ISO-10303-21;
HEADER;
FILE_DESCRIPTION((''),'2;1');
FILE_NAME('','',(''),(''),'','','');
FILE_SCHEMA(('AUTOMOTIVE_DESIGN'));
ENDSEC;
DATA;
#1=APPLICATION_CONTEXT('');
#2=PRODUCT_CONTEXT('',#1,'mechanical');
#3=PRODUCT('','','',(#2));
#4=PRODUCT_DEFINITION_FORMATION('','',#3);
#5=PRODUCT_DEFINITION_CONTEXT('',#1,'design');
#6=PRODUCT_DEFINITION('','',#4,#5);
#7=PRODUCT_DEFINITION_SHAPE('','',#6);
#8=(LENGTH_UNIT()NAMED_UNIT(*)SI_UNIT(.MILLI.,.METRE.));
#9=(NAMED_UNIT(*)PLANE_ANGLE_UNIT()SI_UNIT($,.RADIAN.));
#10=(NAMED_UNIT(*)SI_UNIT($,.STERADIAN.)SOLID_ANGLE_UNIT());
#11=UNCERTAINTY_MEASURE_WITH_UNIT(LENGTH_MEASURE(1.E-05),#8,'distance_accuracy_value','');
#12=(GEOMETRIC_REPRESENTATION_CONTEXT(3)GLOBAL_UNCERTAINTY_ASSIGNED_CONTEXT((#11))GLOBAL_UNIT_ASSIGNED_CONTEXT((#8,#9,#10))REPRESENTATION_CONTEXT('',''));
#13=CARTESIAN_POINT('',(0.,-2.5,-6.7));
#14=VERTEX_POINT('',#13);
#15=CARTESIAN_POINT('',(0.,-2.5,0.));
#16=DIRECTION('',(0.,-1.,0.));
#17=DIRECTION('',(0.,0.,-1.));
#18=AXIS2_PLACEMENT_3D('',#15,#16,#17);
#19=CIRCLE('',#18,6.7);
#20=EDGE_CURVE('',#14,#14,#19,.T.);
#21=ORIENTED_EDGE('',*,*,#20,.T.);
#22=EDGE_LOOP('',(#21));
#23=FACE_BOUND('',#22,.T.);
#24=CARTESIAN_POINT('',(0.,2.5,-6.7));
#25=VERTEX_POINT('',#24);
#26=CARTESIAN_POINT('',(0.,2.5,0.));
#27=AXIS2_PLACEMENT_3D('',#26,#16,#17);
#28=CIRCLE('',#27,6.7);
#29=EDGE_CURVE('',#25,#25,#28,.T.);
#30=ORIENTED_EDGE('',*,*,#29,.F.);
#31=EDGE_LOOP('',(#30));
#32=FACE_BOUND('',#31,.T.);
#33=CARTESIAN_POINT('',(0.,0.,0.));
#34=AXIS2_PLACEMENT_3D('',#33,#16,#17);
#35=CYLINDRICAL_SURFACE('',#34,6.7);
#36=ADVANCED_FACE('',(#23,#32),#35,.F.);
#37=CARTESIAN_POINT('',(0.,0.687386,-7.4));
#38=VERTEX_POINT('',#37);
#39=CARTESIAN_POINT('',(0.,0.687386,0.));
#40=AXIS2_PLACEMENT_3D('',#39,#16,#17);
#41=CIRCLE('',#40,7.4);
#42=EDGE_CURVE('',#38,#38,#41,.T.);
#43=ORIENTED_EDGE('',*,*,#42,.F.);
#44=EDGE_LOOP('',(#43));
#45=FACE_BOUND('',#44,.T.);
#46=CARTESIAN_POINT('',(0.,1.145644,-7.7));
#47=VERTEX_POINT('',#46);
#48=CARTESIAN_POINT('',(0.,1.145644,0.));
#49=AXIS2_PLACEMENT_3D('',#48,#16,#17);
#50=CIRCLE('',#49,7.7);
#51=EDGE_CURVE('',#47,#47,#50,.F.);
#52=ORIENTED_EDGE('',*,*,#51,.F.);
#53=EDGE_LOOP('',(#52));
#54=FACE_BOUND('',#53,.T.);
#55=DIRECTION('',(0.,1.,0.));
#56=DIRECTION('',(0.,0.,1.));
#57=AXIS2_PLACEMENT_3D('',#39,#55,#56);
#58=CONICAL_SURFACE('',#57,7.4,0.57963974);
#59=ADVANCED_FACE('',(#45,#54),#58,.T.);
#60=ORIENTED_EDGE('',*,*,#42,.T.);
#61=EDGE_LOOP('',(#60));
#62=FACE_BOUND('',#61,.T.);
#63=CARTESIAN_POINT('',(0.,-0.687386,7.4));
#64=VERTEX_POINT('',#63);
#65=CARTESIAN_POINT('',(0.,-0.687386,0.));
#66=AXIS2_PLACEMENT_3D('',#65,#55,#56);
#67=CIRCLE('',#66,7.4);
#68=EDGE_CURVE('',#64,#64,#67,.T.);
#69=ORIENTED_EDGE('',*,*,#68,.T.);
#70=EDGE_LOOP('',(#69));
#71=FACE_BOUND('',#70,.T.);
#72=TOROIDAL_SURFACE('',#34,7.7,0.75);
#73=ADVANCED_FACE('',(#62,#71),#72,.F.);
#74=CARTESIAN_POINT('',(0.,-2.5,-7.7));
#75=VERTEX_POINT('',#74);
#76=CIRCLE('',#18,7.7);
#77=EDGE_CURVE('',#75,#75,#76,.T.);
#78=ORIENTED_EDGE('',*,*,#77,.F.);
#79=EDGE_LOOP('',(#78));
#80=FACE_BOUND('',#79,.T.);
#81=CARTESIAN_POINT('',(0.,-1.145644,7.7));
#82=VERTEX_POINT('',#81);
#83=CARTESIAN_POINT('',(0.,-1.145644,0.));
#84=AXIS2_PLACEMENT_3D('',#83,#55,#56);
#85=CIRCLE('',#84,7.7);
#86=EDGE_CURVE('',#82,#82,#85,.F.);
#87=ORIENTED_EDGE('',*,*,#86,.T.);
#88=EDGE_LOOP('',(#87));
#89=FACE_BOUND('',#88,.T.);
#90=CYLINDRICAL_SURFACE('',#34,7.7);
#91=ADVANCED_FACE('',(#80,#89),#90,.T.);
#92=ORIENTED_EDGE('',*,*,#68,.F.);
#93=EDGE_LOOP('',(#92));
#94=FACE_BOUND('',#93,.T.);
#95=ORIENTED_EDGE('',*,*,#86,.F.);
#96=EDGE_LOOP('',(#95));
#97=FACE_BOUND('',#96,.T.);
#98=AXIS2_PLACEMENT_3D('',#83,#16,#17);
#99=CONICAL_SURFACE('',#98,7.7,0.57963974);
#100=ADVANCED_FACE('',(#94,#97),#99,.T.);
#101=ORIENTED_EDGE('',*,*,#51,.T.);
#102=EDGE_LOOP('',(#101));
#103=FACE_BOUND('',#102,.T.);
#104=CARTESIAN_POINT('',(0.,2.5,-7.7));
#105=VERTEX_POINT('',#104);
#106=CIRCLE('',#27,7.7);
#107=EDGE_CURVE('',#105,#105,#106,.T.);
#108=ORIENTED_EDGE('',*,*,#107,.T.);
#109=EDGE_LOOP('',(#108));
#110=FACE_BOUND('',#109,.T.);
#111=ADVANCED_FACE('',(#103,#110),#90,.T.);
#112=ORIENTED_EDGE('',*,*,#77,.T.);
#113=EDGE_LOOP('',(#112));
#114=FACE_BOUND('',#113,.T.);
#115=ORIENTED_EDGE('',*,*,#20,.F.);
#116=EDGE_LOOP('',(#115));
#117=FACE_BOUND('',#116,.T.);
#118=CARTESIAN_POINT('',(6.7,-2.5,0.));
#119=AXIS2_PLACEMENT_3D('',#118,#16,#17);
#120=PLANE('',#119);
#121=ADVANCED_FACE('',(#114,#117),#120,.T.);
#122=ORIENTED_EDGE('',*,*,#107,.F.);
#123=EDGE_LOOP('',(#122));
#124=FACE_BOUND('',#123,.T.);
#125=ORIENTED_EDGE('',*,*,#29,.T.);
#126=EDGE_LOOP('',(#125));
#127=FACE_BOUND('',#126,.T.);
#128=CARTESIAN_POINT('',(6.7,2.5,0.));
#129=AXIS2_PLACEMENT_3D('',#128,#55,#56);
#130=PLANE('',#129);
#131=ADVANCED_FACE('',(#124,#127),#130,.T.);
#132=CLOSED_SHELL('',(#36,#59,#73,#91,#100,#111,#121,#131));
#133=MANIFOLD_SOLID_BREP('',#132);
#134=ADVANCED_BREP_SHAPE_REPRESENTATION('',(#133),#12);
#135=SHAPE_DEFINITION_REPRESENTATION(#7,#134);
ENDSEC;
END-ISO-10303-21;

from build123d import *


with BuildPart() as part:
    # Sketch1 → Revolve1 (revolve)
    with BuildSketch(Plane.XY, mode=Mode.PRIVATE) as revolve1_sk:
        with BuildLine():
            Line((6.7, -2.5), (6.7, 2.5))
            Line((6.7, 2.5), (7.7, 2.5))
            Line((7.7, 2.5), (7.7, 0.75))
            ThreePointArc((7.7, 0.75), (6.95, 0), (7.7, -0.75))
            Line((7.7, -0.75), (7.7, -2.5))
            Line((7.7, -2.5), (6.7, -2.5))
        make_face()
    revolve(revolve1_sk.sketch.rotate(Axis((0, 0, 0), (0, 1, 0)), 90), axis=Axis((0, 0, 0), (0, 1, 0)))

    # Chamfer1
    # the kernel refuses this chamfer: 0.5 mm, written as the material it takes off along each edge
    with BuildSketch(Plane(origin=(0, -0.75, 0), x_dir=(0, 0, -1), z_dir=(1, 0, 0))) as chamfer1_piece_1:
        with BuildLine():
            Line((7.389045549, 0.079346846), (7.710954451, -0.412377124))
            Line((7.710954451, -0.412377124), (7.720954451, -0.412377124))
            ThreePointArc((7.720954451, -0.412377124), (7.71, -0.206188562), (7.71, 0))
            Line((7.71, 0), (7.7, 0.01))
            ThreePointArc((7.7, 0.01), (7.54177371, 0.027113812), (7.393045549, 0.088511998))
            Line((7.393045549, 0.088511998), (7.389045549, 0.079346846))
        make_face()
    revolve(axis=Axis((0, -0.75, 0), (0, 1, 0)), mode=Mode.SUBTRACT)
    with BuildSketch(Plane(origin=(0, 0.75, 0), x_dir=(0, 0, -1), z_dir=(1, 0, 0))) as chamfer1_piece_2:
        with BuildLine():
            Line((7.710954451, 0.412377124), (7.389045549, -0.079346846))
            Line((7.389045549, -0.079346846), (7.393045549, -0.088511998))
            ThreePointArc((7.393045549, -0.088511998), (7.54177371, -0.027113812), (7.7, -0.01))
            Line((7.7, -0.01), (7.71, 0))
            ThreePointArc((7.71, 0), (7.71, 0.206188562), (7.720954451, 0.412377124))
            Line((7.720954451, 0.412377124), (7.710954451, 0.412377124))
        make_face()
    revolve(axis=Axis((0, 0.75, 0), (0, 1, 0)), mode=Mode.SUBTRACT)


solid = part.part
